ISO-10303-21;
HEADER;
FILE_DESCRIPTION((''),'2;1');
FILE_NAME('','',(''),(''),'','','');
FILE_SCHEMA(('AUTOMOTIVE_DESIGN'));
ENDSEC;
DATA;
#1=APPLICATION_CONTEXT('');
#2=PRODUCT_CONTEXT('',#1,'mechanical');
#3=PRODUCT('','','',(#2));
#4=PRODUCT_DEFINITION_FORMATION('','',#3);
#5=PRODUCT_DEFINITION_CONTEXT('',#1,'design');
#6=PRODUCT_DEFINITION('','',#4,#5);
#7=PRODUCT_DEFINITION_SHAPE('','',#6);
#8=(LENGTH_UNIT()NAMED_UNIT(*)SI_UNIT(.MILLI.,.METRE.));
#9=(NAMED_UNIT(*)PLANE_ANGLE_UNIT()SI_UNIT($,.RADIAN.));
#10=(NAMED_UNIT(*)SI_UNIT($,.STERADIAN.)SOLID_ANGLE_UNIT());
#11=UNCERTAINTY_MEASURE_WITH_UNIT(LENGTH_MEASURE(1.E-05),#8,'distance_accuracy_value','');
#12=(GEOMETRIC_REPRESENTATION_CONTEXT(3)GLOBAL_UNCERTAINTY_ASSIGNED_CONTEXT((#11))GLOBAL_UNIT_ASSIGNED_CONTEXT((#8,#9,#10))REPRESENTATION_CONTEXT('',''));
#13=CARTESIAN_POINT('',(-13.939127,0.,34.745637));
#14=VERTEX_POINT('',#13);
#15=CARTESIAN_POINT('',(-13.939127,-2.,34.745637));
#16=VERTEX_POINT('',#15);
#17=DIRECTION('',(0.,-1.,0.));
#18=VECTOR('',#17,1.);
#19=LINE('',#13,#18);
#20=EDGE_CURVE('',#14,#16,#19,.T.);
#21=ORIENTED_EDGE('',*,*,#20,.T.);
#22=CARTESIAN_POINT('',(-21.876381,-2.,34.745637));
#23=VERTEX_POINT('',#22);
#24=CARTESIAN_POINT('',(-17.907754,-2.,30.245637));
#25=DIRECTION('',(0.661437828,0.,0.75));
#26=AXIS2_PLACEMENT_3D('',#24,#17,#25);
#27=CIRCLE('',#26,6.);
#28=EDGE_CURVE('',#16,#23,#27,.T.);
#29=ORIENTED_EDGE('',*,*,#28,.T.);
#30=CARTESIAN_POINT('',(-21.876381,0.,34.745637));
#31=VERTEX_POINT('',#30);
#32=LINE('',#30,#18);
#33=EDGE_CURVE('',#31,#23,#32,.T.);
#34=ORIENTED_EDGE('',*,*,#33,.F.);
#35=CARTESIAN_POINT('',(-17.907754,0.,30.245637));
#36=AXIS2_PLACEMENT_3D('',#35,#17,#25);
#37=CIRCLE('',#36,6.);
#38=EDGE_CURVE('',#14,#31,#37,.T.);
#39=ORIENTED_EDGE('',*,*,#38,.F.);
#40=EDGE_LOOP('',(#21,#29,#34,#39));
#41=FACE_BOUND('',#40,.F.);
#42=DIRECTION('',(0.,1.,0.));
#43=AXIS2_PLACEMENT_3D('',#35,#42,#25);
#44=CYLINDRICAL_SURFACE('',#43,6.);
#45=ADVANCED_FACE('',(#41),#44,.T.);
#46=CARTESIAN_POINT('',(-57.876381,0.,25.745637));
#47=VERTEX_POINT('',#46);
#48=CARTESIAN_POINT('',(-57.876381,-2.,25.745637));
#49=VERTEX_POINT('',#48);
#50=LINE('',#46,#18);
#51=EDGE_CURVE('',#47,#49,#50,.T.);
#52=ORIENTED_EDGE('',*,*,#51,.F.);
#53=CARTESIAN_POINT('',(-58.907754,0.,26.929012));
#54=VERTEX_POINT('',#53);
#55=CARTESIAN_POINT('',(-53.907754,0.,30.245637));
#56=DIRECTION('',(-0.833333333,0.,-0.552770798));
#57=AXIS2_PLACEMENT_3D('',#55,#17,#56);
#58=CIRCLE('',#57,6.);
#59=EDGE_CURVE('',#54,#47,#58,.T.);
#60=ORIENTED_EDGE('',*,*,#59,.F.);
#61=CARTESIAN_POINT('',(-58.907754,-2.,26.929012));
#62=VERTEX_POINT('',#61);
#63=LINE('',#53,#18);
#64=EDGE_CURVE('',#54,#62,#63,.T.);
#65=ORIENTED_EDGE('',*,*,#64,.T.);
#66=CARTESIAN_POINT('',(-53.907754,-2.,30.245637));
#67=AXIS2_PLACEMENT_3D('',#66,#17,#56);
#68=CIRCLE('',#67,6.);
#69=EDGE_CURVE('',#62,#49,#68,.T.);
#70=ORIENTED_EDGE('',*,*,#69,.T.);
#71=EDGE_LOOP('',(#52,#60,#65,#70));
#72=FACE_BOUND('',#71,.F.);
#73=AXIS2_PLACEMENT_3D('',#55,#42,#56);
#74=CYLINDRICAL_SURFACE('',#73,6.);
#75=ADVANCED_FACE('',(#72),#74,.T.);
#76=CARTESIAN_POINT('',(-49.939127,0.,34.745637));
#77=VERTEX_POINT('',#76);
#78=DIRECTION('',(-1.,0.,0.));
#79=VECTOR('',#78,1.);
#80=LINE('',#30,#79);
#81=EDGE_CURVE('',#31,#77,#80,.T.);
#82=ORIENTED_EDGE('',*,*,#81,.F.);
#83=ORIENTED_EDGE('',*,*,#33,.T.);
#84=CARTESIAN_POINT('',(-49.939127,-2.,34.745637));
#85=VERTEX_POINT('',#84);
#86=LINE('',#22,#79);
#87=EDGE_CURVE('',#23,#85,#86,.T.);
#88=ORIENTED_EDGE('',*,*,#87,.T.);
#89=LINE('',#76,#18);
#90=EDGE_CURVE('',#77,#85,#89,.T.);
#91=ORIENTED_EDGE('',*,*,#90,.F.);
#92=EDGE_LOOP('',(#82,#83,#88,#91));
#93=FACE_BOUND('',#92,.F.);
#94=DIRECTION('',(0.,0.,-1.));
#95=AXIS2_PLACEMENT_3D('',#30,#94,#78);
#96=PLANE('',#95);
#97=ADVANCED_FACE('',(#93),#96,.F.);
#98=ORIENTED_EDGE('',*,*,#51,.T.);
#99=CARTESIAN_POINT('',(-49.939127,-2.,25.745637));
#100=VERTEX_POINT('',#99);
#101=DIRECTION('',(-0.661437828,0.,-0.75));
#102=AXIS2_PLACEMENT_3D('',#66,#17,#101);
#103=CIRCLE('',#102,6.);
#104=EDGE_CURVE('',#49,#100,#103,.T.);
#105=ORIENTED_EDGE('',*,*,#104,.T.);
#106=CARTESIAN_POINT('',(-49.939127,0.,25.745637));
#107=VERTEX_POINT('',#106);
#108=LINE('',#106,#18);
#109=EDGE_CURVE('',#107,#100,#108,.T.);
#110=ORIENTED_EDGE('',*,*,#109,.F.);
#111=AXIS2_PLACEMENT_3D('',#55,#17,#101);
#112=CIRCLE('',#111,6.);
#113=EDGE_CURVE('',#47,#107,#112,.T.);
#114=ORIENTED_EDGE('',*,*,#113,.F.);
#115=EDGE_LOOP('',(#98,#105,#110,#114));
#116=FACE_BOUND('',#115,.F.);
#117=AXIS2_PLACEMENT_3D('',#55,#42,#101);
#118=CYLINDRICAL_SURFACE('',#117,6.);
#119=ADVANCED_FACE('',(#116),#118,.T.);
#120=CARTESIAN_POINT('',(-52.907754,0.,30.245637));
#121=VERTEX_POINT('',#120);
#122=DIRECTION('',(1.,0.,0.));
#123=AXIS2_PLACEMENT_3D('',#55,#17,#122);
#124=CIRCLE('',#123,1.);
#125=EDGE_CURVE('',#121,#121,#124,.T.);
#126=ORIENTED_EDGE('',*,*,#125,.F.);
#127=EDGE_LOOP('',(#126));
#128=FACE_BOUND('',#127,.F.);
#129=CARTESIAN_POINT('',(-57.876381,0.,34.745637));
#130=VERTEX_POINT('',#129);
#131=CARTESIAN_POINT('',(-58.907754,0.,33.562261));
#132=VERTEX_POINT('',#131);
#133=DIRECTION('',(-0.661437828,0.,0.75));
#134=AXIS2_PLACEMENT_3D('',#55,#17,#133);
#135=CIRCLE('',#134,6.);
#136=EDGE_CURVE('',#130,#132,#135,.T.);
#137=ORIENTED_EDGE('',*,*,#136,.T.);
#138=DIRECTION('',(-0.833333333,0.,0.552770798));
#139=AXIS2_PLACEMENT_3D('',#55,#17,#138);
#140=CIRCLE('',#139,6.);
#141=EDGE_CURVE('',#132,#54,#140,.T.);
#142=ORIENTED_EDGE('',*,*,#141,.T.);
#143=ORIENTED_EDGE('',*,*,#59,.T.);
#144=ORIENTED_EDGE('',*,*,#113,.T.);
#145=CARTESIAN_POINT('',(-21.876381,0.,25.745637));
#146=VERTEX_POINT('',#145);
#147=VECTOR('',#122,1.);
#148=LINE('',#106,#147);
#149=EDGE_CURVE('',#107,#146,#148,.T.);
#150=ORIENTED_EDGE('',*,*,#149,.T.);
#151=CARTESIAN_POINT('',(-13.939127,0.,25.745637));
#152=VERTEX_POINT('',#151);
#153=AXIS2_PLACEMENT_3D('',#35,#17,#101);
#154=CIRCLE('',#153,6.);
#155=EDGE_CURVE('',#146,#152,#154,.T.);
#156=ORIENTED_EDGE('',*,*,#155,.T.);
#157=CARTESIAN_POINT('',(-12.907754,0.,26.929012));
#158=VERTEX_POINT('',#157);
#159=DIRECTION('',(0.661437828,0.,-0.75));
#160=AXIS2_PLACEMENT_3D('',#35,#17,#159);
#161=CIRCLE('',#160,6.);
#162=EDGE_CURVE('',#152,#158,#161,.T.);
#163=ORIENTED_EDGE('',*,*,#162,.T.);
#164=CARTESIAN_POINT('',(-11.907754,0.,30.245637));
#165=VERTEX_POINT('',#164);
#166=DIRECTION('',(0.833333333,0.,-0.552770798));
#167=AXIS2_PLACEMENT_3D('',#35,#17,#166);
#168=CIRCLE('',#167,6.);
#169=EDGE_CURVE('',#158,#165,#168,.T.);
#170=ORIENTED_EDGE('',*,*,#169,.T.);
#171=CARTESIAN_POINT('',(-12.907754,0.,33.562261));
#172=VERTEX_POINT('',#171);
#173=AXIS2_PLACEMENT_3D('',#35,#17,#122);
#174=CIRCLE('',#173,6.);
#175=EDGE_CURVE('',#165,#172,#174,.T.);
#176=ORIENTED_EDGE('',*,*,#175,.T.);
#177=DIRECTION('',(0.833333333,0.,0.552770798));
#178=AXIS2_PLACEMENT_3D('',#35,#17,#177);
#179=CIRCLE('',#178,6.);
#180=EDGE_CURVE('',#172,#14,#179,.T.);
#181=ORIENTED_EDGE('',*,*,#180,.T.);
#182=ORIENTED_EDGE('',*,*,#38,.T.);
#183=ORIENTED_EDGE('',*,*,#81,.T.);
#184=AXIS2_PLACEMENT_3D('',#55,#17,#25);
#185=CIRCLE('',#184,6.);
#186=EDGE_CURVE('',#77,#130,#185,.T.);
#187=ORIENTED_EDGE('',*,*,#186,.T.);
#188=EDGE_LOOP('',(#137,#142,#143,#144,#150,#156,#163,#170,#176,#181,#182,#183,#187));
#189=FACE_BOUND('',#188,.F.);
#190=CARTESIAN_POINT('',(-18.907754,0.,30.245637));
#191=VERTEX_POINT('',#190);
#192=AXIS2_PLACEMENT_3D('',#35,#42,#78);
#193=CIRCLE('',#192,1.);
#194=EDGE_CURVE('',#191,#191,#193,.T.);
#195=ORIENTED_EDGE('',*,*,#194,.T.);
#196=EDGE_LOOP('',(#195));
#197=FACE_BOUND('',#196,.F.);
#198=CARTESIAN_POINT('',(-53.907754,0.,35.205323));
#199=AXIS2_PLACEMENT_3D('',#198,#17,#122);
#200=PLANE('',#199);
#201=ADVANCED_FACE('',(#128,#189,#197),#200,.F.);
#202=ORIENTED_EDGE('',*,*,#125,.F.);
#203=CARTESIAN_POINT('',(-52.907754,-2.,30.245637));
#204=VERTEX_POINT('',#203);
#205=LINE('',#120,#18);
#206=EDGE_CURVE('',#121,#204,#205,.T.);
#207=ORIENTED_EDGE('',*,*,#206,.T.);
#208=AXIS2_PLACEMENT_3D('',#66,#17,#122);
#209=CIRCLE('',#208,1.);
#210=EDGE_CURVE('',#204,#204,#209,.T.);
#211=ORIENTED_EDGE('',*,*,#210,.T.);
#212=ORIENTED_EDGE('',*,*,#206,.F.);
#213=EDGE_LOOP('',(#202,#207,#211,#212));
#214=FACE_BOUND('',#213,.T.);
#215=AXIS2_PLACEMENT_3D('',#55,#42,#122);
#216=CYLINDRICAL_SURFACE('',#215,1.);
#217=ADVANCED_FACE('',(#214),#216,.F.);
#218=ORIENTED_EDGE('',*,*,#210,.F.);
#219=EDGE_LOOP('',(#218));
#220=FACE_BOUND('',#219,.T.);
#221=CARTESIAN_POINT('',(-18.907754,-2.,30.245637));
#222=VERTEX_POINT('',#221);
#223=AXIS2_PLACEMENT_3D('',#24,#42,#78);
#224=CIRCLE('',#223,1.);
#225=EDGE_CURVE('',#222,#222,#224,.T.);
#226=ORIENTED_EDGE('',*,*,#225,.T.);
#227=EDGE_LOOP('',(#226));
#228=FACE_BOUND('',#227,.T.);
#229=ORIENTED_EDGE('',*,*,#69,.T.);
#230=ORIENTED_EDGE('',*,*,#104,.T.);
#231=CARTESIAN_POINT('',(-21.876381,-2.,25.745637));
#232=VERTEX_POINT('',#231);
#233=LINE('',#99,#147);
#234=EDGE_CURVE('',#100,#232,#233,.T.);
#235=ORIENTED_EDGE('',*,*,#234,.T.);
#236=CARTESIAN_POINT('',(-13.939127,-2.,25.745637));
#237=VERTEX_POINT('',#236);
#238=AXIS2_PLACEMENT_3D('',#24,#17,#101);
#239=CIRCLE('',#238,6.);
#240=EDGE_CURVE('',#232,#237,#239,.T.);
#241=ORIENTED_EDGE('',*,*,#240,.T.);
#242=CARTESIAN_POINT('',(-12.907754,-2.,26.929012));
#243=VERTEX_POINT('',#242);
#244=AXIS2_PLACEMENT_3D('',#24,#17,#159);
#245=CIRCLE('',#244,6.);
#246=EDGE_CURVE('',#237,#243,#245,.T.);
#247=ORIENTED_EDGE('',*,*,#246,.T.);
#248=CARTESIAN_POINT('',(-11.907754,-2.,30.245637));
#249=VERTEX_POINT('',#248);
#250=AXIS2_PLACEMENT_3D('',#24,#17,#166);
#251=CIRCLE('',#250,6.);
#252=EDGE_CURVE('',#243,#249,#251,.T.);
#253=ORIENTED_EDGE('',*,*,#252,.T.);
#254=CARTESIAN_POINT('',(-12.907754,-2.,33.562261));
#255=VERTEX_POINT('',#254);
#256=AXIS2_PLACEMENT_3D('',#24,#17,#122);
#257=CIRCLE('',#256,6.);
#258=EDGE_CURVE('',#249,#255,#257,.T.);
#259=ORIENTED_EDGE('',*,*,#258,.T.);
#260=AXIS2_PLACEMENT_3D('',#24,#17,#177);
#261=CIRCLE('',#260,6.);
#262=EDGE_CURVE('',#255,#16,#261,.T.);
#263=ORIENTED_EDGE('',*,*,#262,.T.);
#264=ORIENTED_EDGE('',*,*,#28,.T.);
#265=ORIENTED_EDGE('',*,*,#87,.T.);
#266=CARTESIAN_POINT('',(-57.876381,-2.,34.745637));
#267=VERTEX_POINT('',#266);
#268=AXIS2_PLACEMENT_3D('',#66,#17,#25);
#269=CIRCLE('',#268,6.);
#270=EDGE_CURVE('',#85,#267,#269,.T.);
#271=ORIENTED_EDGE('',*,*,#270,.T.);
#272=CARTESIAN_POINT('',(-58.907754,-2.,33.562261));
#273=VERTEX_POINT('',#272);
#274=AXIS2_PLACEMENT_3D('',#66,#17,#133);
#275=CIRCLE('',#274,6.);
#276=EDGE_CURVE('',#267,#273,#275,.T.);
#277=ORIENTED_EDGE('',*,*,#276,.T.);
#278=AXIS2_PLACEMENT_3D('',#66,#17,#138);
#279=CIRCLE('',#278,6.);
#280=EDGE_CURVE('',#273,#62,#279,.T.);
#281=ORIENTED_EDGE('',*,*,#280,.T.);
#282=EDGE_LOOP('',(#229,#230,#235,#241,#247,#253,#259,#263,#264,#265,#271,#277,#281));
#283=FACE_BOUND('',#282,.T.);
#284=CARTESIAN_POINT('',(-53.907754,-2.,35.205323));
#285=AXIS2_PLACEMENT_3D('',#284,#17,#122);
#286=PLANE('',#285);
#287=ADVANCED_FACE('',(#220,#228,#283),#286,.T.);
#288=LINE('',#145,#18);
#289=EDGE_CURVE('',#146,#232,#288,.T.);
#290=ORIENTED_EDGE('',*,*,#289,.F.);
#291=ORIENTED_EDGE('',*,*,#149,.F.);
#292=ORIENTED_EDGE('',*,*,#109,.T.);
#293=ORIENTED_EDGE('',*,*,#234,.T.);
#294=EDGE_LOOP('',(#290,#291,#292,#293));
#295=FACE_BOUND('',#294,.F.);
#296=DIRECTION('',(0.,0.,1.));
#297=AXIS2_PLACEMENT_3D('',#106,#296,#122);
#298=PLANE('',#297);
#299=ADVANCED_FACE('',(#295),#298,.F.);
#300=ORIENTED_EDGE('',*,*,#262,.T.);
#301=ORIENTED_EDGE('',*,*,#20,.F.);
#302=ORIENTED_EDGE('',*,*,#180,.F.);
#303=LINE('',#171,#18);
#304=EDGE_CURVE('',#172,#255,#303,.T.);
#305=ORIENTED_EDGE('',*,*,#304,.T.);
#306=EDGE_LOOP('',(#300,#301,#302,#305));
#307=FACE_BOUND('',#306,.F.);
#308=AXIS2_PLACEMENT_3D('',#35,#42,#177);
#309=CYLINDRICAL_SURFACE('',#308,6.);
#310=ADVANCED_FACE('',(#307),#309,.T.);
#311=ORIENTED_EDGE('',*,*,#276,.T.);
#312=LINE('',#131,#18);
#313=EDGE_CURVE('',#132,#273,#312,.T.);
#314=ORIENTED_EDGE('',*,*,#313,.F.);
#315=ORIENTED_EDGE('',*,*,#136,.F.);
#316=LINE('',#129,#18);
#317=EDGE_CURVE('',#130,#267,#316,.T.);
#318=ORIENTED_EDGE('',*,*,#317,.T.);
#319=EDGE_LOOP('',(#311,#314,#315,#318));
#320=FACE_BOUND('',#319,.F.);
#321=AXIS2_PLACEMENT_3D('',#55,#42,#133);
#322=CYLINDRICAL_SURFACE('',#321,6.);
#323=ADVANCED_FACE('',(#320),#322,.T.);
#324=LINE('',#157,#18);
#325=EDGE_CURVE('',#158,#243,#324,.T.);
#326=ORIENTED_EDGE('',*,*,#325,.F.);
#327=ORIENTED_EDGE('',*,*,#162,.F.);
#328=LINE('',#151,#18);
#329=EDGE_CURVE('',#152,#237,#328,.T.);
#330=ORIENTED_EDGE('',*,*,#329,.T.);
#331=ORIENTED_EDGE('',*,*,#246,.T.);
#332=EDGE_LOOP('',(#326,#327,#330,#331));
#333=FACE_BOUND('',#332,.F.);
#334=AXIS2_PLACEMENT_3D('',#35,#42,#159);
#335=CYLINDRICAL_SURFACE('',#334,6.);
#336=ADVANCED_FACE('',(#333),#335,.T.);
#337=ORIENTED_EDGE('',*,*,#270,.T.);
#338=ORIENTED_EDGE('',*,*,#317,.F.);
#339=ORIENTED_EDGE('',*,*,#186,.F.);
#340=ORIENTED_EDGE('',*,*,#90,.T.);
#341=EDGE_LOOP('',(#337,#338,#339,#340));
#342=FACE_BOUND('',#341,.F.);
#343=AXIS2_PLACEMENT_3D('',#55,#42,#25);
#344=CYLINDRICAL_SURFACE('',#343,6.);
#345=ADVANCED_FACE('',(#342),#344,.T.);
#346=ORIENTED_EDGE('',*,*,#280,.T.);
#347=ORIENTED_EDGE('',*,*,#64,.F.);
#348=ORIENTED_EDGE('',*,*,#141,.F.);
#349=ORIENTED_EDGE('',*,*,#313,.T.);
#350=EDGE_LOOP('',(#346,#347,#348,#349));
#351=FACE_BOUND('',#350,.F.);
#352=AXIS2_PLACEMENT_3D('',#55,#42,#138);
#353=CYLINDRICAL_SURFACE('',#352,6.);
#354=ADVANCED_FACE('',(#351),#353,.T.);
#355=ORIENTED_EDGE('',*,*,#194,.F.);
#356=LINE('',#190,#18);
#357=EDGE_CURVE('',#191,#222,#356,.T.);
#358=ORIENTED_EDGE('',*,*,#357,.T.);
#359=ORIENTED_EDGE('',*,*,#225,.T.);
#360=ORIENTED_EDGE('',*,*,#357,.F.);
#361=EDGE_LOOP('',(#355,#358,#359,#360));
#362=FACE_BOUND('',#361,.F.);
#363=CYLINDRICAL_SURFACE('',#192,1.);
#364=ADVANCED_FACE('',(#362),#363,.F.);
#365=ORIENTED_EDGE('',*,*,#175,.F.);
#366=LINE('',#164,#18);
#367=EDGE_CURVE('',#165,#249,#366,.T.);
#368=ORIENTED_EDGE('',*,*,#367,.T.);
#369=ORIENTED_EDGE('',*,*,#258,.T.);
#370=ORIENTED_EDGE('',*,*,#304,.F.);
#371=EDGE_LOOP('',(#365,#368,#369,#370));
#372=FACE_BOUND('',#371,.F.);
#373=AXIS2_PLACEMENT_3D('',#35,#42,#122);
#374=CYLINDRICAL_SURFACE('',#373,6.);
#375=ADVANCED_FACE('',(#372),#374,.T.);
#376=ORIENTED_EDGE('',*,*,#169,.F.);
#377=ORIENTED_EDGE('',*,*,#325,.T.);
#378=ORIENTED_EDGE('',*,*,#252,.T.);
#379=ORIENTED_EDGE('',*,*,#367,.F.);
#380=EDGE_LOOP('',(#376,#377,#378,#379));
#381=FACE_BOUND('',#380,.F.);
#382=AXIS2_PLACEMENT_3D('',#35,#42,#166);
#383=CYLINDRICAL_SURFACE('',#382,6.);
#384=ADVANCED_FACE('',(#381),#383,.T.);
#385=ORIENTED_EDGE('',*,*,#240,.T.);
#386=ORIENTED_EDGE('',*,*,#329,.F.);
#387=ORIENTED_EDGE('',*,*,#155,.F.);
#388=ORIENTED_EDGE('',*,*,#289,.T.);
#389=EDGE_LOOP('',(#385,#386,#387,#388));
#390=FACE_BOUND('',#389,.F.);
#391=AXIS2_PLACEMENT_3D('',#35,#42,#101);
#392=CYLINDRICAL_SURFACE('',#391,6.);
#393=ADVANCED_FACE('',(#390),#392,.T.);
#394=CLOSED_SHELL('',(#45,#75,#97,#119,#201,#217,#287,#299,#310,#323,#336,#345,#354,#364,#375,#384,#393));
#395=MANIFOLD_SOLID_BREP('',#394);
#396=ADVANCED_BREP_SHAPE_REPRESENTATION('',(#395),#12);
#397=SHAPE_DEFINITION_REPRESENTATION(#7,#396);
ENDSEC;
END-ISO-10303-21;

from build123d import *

# Parameters (mm, degrees)
F0_R     = 1
F1_DEPTH = 2


with BuildPart() as f1:
    # F0 (on Front) → F1 (new body)
    with BuildSketch(Plane.XZ):
        with BuildLine():
            ThreePointArc((-49.9391267766, 34.7456367077), (-53.9077537432, 36.2456367077), (-57.8763807098, 34.7456367077))
            Line((-57.8763807098, 34.7456367077), (-49.9391267766, 34.7456367077))
        make_face()
        with BuildLine():
            Line((-49.9391267766, 34.7456367077), (-57.8763807098, 34.7456367077))
            ThreePointArc((-57.8763807098, 34.7456367077), (-58.4309342214, 34.1878237101), (-58.9077537432, 33.562261498))
            Line((-58.9077537432, 33.562261498), (-58.9077537432, 26.9290119173))
            ThreePointArc((-58.9077537432, 26.9290119173), (-58.4309342214, 26.3034497053), (-57.8763807098, 25.7456367077))
            Line((-57.8763807098, 25.7456367077), (-49.9391267766, 25.7456367077))
            ThreePointArc((-49.9391267766, 25.7456367077), (-49.3845732651, 26.3034497053), (-48.9077537432, 26.9290119173))
            Line((-48.9077537432, 26.9290119173), (-48.9077537432, 30.2456367077))
            Line((-48.9077537432, 30.2456367077), (-48.9077537432, 33.562261498))
            ThreePointArc((-48.9077537432, 33.562261498), (-49.3845732651, 34.1878237101), (-49.9391267766, 34.7456367077))
        make_face()
        with Locations((-53.9077537432, 30.2456367077)):
            Circle(F0_R, mode=Mode.SUBTRACT)
        with BuildLine():
            Line((-58.9077537432, 26.9290119173), (-58.9077537432, 33.562261498))
            ThreePointArc((-58.9077537432, 33.562261498), (-59.9077537432, 30.2456367077), (-58.9077537432, 26.9290119173))
        make_face()
        with BuildLine():
            Line((-48.9077537432, 34.7456367077), (-49.9391267766, 34.7456367077))
            ThreePointArc((-49.9391267766, 34.7456367077), (-49.3845732651, 34.1878237101), (-48.9077537432, 33.562261498))
            Line((-48.9077537432, 33.562261498), (-48.9077537432, 34.7456367077))
        make_face()
        with BuildLine():
            Line((-22.9077537432, 34.7456367077), (-48.9077537432, 34.7456367077))
            Line((-48.9077537432, 34.7456367077), (-48.9077537432, 33.562261498))
            ThreePointArc((-48.9077537432, 33.562261498), (-48.1631910967, 31.9776875152), (-47.9077537432, 30.2456367077))
            ThreePointArc((-47.9077537432, 30.2456367077), (-48.1631910967, 28.5135859001), (-48.9077537432, 26.9290119173))
            Line((-48.9077537432, 26.9290119173), (-48.9077537432, 25.7456367077))
            Line((-48.9077537432, 25.7456367077), (-22.9077537432, 25.7456367077))
            Line((-22.9077537432, 25.7456367077), (-22.9077537432, 26.9290119173))
            ThreePointArc((-22.9077537432, 26.9290119173), (-23.9077537432, 30.2456367077), (-22.9077537432, 33.562261498))
            Line((-22.9077537432, 33.562261498), (-22.9077537432, 34.7456367077))
        make_face()
        with BuildLine():
            ThreePointArc((-47.9077537432, 30.2456367077), (-48.1631910967, 31.9776875152), (-48.9077537432, 33.562261498))
            Line((-48.9077537432, 33.562261498), (-48.9077537432, 30.2456367077))
            Line((-48.9077537432, 30.2456367077), (-48.9077537432, 26.9290119173))
            ThreePointArc((-48.9077537432, 26.9290119173), (-48.1631910967, 28.5135859001), (-47.9077537432, 30.2456367077))
        make_face()
        with BuildLine():
            Line((-49.9391267766, 25.7456367077), (-57.8763807098, 25.7456367077))
            ThreePointArc((-57.8763807098, 25.7456367077), (-53.9077537432, 24.2456367077), (-49.9391267766, 25.7456367077))
        make_face()
        with BuildLine():
            Line((-21.8763807098, 34.7456367077), (-22.9077537432, 34.7456367077))
            Line((-22.9077537432, 34.7456367077), (-22.9077537432, 33.562261498))
            ThreePointArc((-22.9077537432, 33.562261498), (-22.4309342214, 34.1878237101), (-21.8763807098, 34.7456367077))
        make_face()
        with BuildLine():
            ThreePointArc((-48.9077537432, 26.9290119173), (-49.3845732651, 26.3034497053), (-49.9391267766, 25.7456367077))
            Line((-49.9391267766, 25.7456367077), (-48.9077537432, 25.7456367077))
            Line((-48.9077537432, 25.7456367077), (-48.9077537432, 26.9290119173))
        make_face()
        with BuildLine():
            ThreePointArc((-13.9391267766, 34.7456367077), (-17.9077537432, 36.2456367077), (-21.8763807098, 34.7456367077))
            Line((-21.8763807098, 34.7456367077), (-13.9391267766, 34.7456367077))
        make_face()
        with BuildLine():
            Line((-13.9391267766, 34.7456367077), (-21.8763807098, 34.7456367077))
            ThreePointArc((-21.8763807098, 34.7456367077), (-22.4309342214, 34.1878237101), (-22.9077537432, 33.562261498))
            Line((-22.9077537432, 33.562261498), (-22.9077537432, 30.2456367077))
            Line((-22.9077537432, 30.2456367077), (-22.9077537432, 26.9290119173))
            ThreePointArc((-22.9077537432, 26.9290119173), (-22.4309342214, 26.3034497053), (-21.8763807098, 25.7456367077))
            Line((-21.8763807098, 25.7456367077), (-13.9391267766, 25.7456367077))
            ThreePointArc((-13.9391267766, 25.7456367077), (-13.3845732651, 26.3034497053), (-12.9077537432, 26.9290119173))
            Line((-12.9077537432, 26.9290119173), (-12.9077537432, 33.562261498))
            ThreePointArc((-12.9077537432, 33.562261498), (-13.3845732651, 34.1878237101), (-13.9391267766, 34.7456367077))
        make_face()
        with BuildLine():
            ThreePointArc((-16.9077537432, 30.2456367077), (-17.9077537432, 29.2456367077), (-18.9077537432, 30.2456367077))
            ThreePointArc((-18.9077537432, 30.2456367077), (-17.9077537432, 31.2456367077), (-16.9077537432, 30.2456367077))
        make_face(mode=Mode.SUBTRACT)
        with BuildLine():
            Line((-22.9077537432, 30.2456367077), (-22.9077537432, 33.562261498))
            ThreePointArc((-22.9077537432, 33.562261498), (-23.9077537432, 30.2456367077), (-22.9077537432, 26.9290119173))
            Line((-22.9077537432, 26.9290119173), (-22.9077537432, 30.2456367077))
        make_face()
        with BuildLine():
            ThreePointArc((-21.8763807098, 25.7456367077), (-22.4309342214, 26.3034497053), (-22.9077537432, 26.9290119173))
            Line((-22.9077537432, 26.9290119173), (-22.9077537432, 25.7456367077))
            Line((-22.9077537432, 25.7456367077), (-21.8763807098, 25.7456367077))
        make_face()
        with BuildLine():
            ThreePointArc((-11.9077537432, 30.2456367077), (-12.1631910967, 31.9776875152), (-12.9077537432, 33.562261498))
            Line((-12.9077537432, 33.562261498), (-12.9077537432, 26.9290119173))
            ThreePointArc((-12.9077537432, 26.9290119173), (-12.1631910967, 28.5135859001), (-11.9077537432, 30.2456367077))
        make_face()
        with BuildLine():
            Line((-13.9391267766, 25.7456367077), (-21.8763807098, 25.7456367077))
            ThreePointArc((-21.8763807098, 25.7456367077), (-17.9077537432, 24.2456367077), (-13.9391267766, 25.7456367077))
        make_face()
    extrude(amount=F1_DEPTH)


solid = f1.part
